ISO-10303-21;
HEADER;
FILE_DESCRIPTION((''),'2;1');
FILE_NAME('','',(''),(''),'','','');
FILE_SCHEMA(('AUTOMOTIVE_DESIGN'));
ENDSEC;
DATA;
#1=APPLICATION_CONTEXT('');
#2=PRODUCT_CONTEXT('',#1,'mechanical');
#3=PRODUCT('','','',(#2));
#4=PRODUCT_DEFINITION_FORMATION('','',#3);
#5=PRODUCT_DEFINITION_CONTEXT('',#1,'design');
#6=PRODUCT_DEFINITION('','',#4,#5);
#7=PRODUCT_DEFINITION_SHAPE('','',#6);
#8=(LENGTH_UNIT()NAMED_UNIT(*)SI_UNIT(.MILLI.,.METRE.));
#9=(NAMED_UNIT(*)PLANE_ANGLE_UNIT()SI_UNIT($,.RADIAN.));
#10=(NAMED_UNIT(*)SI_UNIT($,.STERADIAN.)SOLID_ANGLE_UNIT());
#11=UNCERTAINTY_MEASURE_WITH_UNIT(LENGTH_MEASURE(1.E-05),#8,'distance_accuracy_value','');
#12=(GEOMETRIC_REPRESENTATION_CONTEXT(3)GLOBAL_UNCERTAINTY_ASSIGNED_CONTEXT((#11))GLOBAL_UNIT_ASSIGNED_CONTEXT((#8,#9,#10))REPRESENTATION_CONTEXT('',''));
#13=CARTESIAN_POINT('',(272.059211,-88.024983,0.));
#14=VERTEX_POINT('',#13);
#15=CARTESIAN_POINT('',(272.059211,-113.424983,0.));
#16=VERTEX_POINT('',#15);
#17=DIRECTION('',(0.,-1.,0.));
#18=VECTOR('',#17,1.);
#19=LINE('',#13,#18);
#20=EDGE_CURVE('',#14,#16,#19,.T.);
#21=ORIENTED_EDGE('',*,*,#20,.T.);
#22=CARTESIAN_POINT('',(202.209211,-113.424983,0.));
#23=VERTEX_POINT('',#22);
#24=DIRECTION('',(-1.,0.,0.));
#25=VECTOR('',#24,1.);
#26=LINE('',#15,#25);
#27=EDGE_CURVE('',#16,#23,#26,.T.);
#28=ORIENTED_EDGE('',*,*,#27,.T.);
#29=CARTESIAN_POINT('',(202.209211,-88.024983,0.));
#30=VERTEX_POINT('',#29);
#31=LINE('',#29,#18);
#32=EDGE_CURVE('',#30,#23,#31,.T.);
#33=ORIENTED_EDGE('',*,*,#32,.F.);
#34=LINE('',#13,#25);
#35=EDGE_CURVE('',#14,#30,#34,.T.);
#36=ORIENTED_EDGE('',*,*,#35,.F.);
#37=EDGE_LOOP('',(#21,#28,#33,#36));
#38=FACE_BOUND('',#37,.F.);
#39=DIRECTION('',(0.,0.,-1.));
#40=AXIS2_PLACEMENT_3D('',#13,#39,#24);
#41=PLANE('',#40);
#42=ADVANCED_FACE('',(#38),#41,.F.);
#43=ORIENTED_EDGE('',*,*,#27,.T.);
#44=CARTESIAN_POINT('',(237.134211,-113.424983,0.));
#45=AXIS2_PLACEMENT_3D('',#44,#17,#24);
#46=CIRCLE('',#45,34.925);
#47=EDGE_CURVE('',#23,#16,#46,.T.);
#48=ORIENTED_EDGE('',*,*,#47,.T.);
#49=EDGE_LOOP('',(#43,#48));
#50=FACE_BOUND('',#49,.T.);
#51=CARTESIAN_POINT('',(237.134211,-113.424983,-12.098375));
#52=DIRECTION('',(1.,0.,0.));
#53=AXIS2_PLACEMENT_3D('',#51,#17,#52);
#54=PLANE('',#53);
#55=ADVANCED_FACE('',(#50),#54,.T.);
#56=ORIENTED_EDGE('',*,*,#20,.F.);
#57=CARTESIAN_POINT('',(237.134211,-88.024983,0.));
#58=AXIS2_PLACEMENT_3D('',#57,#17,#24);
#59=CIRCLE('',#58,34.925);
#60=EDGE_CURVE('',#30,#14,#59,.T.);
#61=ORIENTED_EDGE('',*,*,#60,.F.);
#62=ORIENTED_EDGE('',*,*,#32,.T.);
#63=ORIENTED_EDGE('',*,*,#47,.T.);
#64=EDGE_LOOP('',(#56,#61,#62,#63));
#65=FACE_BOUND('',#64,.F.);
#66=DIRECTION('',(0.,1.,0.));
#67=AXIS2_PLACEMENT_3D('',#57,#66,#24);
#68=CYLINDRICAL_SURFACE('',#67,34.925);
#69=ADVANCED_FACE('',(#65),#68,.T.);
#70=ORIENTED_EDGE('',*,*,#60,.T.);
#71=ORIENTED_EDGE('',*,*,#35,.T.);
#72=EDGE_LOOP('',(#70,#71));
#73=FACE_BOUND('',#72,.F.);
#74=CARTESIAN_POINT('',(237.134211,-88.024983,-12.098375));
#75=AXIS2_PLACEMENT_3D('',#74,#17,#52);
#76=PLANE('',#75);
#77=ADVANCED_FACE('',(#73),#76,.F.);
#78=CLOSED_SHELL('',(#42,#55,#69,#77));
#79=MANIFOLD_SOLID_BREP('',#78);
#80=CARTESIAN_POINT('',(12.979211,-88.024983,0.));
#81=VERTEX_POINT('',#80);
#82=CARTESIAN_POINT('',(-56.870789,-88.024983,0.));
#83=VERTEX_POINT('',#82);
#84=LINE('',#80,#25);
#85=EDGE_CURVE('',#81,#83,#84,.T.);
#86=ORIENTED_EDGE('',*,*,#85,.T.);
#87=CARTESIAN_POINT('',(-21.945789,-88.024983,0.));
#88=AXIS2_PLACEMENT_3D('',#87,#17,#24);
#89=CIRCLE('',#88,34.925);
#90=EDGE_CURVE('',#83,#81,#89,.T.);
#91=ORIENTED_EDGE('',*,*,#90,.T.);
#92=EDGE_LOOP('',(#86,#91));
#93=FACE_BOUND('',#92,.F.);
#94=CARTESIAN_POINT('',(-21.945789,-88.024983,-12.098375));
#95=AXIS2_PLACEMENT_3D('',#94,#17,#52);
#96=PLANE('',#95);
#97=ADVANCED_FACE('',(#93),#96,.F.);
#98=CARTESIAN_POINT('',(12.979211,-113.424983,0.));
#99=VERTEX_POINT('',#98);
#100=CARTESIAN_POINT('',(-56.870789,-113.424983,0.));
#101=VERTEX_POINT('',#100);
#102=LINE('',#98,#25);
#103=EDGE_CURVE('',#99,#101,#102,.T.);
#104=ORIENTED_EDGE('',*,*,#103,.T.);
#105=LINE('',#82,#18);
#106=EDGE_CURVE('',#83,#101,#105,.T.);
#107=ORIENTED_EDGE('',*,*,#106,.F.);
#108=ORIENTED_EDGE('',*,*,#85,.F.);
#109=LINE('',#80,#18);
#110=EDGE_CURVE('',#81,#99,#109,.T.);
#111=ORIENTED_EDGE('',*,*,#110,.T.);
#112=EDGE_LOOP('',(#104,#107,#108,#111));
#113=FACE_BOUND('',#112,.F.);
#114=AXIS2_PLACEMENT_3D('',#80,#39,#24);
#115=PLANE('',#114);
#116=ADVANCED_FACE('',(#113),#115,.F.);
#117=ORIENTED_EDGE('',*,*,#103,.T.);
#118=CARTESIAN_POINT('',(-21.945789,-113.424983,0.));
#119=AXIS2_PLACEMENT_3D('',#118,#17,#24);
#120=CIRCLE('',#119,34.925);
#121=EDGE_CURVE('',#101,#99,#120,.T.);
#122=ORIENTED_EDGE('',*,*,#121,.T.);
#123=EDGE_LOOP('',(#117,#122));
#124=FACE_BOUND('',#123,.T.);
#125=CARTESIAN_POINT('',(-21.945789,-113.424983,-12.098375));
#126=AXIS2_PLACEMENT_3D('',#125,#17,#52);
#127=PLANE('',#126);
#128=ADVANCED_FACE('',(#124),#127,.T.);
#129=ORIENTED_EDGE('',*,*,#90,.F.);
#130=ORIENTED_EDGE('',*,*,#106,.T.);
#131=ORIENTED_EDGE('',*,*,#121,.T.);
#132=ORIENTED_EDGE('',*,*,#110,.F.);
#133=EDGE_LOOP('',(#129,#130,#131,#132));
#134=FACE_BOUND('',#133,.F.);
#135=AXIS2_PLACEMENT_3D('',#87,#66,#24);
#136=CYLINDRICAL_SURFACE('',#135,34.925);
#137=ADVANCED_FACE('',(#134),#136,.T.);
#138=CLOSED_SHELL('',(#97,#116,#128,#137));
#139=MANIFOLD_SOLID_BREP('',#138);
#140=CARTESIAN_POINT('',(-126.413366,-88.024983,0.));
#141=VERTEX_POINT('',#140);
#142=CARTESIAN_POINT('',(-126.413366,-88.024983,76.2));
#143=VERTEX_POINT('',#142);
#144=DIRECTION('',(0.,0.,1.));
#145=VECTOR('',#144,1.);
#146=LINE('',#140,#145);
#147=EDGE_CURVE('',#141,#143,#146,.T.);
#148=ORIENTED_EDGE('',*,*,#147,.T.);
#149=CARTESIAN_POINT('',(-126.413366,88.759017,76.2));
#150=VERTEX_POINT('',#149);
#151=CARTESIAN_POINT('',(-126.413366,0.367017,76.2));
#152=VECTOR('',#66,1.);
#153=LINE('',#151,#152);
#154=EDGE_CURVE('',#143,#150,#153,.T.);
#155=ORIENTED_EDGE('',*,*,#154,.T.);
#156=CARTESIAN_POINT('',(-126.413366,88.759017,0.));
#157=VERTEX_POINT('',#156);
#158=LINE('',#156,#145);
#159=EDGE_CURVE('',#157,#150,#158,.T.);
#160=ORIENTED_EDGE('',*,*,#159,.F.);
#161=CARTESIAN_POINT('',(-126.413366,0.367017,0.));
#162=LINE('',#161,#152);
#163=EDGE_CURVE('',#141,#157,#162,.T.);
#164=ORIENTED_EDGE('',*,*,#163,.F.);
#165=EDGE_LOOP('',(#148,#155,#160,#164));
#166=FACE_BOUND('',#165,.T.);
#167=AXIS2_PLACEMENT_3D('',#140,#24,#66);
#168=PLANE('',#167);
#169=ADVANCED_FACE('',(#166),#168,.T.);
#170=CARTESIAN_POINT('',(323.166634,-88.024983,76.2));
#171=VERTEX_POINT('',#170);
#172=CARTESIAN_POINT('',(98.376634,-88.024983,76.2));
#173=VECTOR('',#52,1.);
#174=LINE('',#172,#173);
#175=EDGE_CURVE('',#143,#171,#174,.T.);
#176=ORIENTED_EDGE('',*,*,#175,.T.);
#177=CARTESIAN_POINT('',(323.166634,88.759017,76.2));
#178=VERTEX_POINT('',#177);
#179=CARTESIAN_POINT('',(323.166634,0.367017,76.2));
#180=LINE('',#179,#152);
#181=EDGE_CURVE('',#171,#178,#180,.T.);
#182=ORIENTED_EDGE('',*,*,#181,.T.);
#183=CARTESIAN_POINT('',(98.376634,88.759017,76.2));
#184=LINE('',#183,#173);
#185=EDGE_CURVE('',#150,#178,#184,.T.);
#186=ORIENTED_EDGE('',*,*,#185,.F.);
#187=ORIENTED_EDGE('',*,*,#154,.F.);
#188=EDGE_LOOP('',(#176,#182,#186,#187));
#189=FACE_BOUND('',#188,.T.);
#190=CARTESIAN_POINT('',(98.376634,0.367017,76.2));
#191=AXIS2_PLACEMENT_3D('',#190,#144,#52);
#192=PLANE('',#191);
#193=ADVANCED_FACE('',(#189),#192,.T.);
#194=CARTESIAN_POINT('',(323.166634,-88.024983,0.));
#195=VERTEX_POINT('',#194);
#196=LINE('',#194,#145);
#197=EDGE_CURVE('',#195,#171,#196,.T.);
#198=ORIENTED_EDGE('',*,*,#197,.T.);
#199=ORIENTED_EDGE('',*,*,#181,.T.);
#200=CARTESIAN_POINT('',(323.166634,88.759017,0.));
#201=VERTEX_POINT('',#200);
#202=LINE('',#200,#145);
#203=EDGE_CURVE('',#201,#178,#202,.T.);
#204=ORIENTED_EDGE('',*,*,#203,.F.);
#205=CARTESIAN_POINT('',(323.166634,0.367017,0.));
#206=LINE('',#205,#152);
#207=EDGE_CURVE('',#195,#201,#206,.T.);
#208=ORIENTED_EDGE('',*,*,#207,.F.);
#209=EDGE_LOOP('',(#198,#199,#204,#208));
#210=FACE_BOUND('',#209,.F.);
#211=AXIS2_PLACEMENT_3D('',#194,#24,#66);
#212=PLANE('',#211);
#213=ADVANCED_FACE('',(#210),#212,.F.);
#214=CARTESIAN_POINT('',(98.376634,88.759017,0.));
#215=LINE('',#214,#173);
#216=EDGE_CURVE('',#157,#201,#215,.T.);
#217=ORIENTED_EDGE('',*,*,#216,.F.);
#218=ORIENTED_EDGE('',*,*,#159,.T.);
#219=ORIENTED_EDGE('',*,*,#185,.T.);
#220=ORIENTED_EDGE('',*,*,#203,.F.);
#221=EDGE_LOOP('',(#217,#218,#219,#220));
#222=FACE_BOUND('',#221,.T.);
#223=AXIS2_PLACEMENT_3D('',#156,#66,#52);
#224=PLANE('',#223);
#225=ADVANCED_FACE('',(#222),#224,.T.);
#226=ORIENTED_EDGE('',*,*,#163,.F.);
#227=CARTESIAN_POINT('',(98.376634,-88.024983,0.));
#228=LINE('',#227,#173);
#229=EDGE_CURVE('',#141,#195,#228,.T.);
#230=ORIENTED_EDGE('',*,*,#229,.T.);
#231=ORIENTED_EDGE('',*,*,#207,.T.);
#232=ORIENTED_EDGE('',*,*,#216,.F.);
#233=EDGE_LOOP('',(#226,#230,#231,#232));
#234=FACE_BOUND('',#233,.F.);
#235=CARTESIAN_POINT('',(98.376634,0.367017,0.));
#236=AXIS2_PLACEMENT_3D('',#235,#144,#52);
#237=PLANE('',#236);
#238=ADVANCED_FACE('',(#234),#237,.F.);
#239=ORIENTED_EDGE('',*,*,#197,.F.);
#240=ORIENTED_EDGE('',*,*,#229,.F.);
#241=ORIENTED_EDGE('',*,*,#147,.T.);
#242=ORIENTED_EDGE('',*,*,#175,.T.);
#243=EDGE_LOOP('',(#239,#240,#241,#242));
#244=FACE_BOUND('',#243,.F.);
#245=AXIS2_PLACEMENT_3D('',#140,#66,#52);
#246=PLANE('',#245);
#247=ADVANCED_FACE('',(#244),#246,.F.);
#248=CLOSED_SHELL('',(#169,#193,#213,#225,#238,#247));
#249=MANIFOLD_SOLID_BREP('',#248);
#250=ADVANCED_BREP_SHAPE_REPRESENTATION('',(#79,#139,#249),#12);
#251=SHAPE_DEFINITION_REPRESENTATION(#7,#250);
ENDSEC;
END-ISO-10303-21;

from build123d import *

# Parameters (mm, degrees)
F0_W     = 449.58
F0_H     = 176.784
F1_DEPTH = 76.2
F3_DEPTH = 25.4


with BuildPart() as f1:
    # F0 (on Top) → F1 (new body)
    with BuildSketch(Plane.XY):
        with Locations((98.376634287, 0.3670174628)):
            Rectangle(F0_W, F0_H)
    extrude(amount=F1_DEPTH)


with BuildPart() as f3:
    # F2 (on face) → F3 (new body)
    with BuildSketch(Plane.XZ.offset(88.0249825372)):
        with BuildLine():
            ThreePointArc((-56.8707894564, 0), (-21.9457894564, -34.925), (12.9792105436, 0))
            Line((12.9792105436, 0), (-56.8707894564, 0))
        make_face()
    extrude(amount=F3_DEPTH)


with BuildPart() as f3b:
    # F2 (on face) → F3, piece 2 (new body)
    with BuildSketch(Plane.XZ.offset(88.0249825372)):
        with BuildLine():
            Line((272.0592105436, 0), (202.2092105436, 0))
            ThreePointArc((202.2092105436, 0), (237.1342105436, -34.925), (272.0592105436, 0))
        make_face()
    extrude(amount=F3_DEPTH)


solid = Compound([f1.part, f3.part, f3b.part])
